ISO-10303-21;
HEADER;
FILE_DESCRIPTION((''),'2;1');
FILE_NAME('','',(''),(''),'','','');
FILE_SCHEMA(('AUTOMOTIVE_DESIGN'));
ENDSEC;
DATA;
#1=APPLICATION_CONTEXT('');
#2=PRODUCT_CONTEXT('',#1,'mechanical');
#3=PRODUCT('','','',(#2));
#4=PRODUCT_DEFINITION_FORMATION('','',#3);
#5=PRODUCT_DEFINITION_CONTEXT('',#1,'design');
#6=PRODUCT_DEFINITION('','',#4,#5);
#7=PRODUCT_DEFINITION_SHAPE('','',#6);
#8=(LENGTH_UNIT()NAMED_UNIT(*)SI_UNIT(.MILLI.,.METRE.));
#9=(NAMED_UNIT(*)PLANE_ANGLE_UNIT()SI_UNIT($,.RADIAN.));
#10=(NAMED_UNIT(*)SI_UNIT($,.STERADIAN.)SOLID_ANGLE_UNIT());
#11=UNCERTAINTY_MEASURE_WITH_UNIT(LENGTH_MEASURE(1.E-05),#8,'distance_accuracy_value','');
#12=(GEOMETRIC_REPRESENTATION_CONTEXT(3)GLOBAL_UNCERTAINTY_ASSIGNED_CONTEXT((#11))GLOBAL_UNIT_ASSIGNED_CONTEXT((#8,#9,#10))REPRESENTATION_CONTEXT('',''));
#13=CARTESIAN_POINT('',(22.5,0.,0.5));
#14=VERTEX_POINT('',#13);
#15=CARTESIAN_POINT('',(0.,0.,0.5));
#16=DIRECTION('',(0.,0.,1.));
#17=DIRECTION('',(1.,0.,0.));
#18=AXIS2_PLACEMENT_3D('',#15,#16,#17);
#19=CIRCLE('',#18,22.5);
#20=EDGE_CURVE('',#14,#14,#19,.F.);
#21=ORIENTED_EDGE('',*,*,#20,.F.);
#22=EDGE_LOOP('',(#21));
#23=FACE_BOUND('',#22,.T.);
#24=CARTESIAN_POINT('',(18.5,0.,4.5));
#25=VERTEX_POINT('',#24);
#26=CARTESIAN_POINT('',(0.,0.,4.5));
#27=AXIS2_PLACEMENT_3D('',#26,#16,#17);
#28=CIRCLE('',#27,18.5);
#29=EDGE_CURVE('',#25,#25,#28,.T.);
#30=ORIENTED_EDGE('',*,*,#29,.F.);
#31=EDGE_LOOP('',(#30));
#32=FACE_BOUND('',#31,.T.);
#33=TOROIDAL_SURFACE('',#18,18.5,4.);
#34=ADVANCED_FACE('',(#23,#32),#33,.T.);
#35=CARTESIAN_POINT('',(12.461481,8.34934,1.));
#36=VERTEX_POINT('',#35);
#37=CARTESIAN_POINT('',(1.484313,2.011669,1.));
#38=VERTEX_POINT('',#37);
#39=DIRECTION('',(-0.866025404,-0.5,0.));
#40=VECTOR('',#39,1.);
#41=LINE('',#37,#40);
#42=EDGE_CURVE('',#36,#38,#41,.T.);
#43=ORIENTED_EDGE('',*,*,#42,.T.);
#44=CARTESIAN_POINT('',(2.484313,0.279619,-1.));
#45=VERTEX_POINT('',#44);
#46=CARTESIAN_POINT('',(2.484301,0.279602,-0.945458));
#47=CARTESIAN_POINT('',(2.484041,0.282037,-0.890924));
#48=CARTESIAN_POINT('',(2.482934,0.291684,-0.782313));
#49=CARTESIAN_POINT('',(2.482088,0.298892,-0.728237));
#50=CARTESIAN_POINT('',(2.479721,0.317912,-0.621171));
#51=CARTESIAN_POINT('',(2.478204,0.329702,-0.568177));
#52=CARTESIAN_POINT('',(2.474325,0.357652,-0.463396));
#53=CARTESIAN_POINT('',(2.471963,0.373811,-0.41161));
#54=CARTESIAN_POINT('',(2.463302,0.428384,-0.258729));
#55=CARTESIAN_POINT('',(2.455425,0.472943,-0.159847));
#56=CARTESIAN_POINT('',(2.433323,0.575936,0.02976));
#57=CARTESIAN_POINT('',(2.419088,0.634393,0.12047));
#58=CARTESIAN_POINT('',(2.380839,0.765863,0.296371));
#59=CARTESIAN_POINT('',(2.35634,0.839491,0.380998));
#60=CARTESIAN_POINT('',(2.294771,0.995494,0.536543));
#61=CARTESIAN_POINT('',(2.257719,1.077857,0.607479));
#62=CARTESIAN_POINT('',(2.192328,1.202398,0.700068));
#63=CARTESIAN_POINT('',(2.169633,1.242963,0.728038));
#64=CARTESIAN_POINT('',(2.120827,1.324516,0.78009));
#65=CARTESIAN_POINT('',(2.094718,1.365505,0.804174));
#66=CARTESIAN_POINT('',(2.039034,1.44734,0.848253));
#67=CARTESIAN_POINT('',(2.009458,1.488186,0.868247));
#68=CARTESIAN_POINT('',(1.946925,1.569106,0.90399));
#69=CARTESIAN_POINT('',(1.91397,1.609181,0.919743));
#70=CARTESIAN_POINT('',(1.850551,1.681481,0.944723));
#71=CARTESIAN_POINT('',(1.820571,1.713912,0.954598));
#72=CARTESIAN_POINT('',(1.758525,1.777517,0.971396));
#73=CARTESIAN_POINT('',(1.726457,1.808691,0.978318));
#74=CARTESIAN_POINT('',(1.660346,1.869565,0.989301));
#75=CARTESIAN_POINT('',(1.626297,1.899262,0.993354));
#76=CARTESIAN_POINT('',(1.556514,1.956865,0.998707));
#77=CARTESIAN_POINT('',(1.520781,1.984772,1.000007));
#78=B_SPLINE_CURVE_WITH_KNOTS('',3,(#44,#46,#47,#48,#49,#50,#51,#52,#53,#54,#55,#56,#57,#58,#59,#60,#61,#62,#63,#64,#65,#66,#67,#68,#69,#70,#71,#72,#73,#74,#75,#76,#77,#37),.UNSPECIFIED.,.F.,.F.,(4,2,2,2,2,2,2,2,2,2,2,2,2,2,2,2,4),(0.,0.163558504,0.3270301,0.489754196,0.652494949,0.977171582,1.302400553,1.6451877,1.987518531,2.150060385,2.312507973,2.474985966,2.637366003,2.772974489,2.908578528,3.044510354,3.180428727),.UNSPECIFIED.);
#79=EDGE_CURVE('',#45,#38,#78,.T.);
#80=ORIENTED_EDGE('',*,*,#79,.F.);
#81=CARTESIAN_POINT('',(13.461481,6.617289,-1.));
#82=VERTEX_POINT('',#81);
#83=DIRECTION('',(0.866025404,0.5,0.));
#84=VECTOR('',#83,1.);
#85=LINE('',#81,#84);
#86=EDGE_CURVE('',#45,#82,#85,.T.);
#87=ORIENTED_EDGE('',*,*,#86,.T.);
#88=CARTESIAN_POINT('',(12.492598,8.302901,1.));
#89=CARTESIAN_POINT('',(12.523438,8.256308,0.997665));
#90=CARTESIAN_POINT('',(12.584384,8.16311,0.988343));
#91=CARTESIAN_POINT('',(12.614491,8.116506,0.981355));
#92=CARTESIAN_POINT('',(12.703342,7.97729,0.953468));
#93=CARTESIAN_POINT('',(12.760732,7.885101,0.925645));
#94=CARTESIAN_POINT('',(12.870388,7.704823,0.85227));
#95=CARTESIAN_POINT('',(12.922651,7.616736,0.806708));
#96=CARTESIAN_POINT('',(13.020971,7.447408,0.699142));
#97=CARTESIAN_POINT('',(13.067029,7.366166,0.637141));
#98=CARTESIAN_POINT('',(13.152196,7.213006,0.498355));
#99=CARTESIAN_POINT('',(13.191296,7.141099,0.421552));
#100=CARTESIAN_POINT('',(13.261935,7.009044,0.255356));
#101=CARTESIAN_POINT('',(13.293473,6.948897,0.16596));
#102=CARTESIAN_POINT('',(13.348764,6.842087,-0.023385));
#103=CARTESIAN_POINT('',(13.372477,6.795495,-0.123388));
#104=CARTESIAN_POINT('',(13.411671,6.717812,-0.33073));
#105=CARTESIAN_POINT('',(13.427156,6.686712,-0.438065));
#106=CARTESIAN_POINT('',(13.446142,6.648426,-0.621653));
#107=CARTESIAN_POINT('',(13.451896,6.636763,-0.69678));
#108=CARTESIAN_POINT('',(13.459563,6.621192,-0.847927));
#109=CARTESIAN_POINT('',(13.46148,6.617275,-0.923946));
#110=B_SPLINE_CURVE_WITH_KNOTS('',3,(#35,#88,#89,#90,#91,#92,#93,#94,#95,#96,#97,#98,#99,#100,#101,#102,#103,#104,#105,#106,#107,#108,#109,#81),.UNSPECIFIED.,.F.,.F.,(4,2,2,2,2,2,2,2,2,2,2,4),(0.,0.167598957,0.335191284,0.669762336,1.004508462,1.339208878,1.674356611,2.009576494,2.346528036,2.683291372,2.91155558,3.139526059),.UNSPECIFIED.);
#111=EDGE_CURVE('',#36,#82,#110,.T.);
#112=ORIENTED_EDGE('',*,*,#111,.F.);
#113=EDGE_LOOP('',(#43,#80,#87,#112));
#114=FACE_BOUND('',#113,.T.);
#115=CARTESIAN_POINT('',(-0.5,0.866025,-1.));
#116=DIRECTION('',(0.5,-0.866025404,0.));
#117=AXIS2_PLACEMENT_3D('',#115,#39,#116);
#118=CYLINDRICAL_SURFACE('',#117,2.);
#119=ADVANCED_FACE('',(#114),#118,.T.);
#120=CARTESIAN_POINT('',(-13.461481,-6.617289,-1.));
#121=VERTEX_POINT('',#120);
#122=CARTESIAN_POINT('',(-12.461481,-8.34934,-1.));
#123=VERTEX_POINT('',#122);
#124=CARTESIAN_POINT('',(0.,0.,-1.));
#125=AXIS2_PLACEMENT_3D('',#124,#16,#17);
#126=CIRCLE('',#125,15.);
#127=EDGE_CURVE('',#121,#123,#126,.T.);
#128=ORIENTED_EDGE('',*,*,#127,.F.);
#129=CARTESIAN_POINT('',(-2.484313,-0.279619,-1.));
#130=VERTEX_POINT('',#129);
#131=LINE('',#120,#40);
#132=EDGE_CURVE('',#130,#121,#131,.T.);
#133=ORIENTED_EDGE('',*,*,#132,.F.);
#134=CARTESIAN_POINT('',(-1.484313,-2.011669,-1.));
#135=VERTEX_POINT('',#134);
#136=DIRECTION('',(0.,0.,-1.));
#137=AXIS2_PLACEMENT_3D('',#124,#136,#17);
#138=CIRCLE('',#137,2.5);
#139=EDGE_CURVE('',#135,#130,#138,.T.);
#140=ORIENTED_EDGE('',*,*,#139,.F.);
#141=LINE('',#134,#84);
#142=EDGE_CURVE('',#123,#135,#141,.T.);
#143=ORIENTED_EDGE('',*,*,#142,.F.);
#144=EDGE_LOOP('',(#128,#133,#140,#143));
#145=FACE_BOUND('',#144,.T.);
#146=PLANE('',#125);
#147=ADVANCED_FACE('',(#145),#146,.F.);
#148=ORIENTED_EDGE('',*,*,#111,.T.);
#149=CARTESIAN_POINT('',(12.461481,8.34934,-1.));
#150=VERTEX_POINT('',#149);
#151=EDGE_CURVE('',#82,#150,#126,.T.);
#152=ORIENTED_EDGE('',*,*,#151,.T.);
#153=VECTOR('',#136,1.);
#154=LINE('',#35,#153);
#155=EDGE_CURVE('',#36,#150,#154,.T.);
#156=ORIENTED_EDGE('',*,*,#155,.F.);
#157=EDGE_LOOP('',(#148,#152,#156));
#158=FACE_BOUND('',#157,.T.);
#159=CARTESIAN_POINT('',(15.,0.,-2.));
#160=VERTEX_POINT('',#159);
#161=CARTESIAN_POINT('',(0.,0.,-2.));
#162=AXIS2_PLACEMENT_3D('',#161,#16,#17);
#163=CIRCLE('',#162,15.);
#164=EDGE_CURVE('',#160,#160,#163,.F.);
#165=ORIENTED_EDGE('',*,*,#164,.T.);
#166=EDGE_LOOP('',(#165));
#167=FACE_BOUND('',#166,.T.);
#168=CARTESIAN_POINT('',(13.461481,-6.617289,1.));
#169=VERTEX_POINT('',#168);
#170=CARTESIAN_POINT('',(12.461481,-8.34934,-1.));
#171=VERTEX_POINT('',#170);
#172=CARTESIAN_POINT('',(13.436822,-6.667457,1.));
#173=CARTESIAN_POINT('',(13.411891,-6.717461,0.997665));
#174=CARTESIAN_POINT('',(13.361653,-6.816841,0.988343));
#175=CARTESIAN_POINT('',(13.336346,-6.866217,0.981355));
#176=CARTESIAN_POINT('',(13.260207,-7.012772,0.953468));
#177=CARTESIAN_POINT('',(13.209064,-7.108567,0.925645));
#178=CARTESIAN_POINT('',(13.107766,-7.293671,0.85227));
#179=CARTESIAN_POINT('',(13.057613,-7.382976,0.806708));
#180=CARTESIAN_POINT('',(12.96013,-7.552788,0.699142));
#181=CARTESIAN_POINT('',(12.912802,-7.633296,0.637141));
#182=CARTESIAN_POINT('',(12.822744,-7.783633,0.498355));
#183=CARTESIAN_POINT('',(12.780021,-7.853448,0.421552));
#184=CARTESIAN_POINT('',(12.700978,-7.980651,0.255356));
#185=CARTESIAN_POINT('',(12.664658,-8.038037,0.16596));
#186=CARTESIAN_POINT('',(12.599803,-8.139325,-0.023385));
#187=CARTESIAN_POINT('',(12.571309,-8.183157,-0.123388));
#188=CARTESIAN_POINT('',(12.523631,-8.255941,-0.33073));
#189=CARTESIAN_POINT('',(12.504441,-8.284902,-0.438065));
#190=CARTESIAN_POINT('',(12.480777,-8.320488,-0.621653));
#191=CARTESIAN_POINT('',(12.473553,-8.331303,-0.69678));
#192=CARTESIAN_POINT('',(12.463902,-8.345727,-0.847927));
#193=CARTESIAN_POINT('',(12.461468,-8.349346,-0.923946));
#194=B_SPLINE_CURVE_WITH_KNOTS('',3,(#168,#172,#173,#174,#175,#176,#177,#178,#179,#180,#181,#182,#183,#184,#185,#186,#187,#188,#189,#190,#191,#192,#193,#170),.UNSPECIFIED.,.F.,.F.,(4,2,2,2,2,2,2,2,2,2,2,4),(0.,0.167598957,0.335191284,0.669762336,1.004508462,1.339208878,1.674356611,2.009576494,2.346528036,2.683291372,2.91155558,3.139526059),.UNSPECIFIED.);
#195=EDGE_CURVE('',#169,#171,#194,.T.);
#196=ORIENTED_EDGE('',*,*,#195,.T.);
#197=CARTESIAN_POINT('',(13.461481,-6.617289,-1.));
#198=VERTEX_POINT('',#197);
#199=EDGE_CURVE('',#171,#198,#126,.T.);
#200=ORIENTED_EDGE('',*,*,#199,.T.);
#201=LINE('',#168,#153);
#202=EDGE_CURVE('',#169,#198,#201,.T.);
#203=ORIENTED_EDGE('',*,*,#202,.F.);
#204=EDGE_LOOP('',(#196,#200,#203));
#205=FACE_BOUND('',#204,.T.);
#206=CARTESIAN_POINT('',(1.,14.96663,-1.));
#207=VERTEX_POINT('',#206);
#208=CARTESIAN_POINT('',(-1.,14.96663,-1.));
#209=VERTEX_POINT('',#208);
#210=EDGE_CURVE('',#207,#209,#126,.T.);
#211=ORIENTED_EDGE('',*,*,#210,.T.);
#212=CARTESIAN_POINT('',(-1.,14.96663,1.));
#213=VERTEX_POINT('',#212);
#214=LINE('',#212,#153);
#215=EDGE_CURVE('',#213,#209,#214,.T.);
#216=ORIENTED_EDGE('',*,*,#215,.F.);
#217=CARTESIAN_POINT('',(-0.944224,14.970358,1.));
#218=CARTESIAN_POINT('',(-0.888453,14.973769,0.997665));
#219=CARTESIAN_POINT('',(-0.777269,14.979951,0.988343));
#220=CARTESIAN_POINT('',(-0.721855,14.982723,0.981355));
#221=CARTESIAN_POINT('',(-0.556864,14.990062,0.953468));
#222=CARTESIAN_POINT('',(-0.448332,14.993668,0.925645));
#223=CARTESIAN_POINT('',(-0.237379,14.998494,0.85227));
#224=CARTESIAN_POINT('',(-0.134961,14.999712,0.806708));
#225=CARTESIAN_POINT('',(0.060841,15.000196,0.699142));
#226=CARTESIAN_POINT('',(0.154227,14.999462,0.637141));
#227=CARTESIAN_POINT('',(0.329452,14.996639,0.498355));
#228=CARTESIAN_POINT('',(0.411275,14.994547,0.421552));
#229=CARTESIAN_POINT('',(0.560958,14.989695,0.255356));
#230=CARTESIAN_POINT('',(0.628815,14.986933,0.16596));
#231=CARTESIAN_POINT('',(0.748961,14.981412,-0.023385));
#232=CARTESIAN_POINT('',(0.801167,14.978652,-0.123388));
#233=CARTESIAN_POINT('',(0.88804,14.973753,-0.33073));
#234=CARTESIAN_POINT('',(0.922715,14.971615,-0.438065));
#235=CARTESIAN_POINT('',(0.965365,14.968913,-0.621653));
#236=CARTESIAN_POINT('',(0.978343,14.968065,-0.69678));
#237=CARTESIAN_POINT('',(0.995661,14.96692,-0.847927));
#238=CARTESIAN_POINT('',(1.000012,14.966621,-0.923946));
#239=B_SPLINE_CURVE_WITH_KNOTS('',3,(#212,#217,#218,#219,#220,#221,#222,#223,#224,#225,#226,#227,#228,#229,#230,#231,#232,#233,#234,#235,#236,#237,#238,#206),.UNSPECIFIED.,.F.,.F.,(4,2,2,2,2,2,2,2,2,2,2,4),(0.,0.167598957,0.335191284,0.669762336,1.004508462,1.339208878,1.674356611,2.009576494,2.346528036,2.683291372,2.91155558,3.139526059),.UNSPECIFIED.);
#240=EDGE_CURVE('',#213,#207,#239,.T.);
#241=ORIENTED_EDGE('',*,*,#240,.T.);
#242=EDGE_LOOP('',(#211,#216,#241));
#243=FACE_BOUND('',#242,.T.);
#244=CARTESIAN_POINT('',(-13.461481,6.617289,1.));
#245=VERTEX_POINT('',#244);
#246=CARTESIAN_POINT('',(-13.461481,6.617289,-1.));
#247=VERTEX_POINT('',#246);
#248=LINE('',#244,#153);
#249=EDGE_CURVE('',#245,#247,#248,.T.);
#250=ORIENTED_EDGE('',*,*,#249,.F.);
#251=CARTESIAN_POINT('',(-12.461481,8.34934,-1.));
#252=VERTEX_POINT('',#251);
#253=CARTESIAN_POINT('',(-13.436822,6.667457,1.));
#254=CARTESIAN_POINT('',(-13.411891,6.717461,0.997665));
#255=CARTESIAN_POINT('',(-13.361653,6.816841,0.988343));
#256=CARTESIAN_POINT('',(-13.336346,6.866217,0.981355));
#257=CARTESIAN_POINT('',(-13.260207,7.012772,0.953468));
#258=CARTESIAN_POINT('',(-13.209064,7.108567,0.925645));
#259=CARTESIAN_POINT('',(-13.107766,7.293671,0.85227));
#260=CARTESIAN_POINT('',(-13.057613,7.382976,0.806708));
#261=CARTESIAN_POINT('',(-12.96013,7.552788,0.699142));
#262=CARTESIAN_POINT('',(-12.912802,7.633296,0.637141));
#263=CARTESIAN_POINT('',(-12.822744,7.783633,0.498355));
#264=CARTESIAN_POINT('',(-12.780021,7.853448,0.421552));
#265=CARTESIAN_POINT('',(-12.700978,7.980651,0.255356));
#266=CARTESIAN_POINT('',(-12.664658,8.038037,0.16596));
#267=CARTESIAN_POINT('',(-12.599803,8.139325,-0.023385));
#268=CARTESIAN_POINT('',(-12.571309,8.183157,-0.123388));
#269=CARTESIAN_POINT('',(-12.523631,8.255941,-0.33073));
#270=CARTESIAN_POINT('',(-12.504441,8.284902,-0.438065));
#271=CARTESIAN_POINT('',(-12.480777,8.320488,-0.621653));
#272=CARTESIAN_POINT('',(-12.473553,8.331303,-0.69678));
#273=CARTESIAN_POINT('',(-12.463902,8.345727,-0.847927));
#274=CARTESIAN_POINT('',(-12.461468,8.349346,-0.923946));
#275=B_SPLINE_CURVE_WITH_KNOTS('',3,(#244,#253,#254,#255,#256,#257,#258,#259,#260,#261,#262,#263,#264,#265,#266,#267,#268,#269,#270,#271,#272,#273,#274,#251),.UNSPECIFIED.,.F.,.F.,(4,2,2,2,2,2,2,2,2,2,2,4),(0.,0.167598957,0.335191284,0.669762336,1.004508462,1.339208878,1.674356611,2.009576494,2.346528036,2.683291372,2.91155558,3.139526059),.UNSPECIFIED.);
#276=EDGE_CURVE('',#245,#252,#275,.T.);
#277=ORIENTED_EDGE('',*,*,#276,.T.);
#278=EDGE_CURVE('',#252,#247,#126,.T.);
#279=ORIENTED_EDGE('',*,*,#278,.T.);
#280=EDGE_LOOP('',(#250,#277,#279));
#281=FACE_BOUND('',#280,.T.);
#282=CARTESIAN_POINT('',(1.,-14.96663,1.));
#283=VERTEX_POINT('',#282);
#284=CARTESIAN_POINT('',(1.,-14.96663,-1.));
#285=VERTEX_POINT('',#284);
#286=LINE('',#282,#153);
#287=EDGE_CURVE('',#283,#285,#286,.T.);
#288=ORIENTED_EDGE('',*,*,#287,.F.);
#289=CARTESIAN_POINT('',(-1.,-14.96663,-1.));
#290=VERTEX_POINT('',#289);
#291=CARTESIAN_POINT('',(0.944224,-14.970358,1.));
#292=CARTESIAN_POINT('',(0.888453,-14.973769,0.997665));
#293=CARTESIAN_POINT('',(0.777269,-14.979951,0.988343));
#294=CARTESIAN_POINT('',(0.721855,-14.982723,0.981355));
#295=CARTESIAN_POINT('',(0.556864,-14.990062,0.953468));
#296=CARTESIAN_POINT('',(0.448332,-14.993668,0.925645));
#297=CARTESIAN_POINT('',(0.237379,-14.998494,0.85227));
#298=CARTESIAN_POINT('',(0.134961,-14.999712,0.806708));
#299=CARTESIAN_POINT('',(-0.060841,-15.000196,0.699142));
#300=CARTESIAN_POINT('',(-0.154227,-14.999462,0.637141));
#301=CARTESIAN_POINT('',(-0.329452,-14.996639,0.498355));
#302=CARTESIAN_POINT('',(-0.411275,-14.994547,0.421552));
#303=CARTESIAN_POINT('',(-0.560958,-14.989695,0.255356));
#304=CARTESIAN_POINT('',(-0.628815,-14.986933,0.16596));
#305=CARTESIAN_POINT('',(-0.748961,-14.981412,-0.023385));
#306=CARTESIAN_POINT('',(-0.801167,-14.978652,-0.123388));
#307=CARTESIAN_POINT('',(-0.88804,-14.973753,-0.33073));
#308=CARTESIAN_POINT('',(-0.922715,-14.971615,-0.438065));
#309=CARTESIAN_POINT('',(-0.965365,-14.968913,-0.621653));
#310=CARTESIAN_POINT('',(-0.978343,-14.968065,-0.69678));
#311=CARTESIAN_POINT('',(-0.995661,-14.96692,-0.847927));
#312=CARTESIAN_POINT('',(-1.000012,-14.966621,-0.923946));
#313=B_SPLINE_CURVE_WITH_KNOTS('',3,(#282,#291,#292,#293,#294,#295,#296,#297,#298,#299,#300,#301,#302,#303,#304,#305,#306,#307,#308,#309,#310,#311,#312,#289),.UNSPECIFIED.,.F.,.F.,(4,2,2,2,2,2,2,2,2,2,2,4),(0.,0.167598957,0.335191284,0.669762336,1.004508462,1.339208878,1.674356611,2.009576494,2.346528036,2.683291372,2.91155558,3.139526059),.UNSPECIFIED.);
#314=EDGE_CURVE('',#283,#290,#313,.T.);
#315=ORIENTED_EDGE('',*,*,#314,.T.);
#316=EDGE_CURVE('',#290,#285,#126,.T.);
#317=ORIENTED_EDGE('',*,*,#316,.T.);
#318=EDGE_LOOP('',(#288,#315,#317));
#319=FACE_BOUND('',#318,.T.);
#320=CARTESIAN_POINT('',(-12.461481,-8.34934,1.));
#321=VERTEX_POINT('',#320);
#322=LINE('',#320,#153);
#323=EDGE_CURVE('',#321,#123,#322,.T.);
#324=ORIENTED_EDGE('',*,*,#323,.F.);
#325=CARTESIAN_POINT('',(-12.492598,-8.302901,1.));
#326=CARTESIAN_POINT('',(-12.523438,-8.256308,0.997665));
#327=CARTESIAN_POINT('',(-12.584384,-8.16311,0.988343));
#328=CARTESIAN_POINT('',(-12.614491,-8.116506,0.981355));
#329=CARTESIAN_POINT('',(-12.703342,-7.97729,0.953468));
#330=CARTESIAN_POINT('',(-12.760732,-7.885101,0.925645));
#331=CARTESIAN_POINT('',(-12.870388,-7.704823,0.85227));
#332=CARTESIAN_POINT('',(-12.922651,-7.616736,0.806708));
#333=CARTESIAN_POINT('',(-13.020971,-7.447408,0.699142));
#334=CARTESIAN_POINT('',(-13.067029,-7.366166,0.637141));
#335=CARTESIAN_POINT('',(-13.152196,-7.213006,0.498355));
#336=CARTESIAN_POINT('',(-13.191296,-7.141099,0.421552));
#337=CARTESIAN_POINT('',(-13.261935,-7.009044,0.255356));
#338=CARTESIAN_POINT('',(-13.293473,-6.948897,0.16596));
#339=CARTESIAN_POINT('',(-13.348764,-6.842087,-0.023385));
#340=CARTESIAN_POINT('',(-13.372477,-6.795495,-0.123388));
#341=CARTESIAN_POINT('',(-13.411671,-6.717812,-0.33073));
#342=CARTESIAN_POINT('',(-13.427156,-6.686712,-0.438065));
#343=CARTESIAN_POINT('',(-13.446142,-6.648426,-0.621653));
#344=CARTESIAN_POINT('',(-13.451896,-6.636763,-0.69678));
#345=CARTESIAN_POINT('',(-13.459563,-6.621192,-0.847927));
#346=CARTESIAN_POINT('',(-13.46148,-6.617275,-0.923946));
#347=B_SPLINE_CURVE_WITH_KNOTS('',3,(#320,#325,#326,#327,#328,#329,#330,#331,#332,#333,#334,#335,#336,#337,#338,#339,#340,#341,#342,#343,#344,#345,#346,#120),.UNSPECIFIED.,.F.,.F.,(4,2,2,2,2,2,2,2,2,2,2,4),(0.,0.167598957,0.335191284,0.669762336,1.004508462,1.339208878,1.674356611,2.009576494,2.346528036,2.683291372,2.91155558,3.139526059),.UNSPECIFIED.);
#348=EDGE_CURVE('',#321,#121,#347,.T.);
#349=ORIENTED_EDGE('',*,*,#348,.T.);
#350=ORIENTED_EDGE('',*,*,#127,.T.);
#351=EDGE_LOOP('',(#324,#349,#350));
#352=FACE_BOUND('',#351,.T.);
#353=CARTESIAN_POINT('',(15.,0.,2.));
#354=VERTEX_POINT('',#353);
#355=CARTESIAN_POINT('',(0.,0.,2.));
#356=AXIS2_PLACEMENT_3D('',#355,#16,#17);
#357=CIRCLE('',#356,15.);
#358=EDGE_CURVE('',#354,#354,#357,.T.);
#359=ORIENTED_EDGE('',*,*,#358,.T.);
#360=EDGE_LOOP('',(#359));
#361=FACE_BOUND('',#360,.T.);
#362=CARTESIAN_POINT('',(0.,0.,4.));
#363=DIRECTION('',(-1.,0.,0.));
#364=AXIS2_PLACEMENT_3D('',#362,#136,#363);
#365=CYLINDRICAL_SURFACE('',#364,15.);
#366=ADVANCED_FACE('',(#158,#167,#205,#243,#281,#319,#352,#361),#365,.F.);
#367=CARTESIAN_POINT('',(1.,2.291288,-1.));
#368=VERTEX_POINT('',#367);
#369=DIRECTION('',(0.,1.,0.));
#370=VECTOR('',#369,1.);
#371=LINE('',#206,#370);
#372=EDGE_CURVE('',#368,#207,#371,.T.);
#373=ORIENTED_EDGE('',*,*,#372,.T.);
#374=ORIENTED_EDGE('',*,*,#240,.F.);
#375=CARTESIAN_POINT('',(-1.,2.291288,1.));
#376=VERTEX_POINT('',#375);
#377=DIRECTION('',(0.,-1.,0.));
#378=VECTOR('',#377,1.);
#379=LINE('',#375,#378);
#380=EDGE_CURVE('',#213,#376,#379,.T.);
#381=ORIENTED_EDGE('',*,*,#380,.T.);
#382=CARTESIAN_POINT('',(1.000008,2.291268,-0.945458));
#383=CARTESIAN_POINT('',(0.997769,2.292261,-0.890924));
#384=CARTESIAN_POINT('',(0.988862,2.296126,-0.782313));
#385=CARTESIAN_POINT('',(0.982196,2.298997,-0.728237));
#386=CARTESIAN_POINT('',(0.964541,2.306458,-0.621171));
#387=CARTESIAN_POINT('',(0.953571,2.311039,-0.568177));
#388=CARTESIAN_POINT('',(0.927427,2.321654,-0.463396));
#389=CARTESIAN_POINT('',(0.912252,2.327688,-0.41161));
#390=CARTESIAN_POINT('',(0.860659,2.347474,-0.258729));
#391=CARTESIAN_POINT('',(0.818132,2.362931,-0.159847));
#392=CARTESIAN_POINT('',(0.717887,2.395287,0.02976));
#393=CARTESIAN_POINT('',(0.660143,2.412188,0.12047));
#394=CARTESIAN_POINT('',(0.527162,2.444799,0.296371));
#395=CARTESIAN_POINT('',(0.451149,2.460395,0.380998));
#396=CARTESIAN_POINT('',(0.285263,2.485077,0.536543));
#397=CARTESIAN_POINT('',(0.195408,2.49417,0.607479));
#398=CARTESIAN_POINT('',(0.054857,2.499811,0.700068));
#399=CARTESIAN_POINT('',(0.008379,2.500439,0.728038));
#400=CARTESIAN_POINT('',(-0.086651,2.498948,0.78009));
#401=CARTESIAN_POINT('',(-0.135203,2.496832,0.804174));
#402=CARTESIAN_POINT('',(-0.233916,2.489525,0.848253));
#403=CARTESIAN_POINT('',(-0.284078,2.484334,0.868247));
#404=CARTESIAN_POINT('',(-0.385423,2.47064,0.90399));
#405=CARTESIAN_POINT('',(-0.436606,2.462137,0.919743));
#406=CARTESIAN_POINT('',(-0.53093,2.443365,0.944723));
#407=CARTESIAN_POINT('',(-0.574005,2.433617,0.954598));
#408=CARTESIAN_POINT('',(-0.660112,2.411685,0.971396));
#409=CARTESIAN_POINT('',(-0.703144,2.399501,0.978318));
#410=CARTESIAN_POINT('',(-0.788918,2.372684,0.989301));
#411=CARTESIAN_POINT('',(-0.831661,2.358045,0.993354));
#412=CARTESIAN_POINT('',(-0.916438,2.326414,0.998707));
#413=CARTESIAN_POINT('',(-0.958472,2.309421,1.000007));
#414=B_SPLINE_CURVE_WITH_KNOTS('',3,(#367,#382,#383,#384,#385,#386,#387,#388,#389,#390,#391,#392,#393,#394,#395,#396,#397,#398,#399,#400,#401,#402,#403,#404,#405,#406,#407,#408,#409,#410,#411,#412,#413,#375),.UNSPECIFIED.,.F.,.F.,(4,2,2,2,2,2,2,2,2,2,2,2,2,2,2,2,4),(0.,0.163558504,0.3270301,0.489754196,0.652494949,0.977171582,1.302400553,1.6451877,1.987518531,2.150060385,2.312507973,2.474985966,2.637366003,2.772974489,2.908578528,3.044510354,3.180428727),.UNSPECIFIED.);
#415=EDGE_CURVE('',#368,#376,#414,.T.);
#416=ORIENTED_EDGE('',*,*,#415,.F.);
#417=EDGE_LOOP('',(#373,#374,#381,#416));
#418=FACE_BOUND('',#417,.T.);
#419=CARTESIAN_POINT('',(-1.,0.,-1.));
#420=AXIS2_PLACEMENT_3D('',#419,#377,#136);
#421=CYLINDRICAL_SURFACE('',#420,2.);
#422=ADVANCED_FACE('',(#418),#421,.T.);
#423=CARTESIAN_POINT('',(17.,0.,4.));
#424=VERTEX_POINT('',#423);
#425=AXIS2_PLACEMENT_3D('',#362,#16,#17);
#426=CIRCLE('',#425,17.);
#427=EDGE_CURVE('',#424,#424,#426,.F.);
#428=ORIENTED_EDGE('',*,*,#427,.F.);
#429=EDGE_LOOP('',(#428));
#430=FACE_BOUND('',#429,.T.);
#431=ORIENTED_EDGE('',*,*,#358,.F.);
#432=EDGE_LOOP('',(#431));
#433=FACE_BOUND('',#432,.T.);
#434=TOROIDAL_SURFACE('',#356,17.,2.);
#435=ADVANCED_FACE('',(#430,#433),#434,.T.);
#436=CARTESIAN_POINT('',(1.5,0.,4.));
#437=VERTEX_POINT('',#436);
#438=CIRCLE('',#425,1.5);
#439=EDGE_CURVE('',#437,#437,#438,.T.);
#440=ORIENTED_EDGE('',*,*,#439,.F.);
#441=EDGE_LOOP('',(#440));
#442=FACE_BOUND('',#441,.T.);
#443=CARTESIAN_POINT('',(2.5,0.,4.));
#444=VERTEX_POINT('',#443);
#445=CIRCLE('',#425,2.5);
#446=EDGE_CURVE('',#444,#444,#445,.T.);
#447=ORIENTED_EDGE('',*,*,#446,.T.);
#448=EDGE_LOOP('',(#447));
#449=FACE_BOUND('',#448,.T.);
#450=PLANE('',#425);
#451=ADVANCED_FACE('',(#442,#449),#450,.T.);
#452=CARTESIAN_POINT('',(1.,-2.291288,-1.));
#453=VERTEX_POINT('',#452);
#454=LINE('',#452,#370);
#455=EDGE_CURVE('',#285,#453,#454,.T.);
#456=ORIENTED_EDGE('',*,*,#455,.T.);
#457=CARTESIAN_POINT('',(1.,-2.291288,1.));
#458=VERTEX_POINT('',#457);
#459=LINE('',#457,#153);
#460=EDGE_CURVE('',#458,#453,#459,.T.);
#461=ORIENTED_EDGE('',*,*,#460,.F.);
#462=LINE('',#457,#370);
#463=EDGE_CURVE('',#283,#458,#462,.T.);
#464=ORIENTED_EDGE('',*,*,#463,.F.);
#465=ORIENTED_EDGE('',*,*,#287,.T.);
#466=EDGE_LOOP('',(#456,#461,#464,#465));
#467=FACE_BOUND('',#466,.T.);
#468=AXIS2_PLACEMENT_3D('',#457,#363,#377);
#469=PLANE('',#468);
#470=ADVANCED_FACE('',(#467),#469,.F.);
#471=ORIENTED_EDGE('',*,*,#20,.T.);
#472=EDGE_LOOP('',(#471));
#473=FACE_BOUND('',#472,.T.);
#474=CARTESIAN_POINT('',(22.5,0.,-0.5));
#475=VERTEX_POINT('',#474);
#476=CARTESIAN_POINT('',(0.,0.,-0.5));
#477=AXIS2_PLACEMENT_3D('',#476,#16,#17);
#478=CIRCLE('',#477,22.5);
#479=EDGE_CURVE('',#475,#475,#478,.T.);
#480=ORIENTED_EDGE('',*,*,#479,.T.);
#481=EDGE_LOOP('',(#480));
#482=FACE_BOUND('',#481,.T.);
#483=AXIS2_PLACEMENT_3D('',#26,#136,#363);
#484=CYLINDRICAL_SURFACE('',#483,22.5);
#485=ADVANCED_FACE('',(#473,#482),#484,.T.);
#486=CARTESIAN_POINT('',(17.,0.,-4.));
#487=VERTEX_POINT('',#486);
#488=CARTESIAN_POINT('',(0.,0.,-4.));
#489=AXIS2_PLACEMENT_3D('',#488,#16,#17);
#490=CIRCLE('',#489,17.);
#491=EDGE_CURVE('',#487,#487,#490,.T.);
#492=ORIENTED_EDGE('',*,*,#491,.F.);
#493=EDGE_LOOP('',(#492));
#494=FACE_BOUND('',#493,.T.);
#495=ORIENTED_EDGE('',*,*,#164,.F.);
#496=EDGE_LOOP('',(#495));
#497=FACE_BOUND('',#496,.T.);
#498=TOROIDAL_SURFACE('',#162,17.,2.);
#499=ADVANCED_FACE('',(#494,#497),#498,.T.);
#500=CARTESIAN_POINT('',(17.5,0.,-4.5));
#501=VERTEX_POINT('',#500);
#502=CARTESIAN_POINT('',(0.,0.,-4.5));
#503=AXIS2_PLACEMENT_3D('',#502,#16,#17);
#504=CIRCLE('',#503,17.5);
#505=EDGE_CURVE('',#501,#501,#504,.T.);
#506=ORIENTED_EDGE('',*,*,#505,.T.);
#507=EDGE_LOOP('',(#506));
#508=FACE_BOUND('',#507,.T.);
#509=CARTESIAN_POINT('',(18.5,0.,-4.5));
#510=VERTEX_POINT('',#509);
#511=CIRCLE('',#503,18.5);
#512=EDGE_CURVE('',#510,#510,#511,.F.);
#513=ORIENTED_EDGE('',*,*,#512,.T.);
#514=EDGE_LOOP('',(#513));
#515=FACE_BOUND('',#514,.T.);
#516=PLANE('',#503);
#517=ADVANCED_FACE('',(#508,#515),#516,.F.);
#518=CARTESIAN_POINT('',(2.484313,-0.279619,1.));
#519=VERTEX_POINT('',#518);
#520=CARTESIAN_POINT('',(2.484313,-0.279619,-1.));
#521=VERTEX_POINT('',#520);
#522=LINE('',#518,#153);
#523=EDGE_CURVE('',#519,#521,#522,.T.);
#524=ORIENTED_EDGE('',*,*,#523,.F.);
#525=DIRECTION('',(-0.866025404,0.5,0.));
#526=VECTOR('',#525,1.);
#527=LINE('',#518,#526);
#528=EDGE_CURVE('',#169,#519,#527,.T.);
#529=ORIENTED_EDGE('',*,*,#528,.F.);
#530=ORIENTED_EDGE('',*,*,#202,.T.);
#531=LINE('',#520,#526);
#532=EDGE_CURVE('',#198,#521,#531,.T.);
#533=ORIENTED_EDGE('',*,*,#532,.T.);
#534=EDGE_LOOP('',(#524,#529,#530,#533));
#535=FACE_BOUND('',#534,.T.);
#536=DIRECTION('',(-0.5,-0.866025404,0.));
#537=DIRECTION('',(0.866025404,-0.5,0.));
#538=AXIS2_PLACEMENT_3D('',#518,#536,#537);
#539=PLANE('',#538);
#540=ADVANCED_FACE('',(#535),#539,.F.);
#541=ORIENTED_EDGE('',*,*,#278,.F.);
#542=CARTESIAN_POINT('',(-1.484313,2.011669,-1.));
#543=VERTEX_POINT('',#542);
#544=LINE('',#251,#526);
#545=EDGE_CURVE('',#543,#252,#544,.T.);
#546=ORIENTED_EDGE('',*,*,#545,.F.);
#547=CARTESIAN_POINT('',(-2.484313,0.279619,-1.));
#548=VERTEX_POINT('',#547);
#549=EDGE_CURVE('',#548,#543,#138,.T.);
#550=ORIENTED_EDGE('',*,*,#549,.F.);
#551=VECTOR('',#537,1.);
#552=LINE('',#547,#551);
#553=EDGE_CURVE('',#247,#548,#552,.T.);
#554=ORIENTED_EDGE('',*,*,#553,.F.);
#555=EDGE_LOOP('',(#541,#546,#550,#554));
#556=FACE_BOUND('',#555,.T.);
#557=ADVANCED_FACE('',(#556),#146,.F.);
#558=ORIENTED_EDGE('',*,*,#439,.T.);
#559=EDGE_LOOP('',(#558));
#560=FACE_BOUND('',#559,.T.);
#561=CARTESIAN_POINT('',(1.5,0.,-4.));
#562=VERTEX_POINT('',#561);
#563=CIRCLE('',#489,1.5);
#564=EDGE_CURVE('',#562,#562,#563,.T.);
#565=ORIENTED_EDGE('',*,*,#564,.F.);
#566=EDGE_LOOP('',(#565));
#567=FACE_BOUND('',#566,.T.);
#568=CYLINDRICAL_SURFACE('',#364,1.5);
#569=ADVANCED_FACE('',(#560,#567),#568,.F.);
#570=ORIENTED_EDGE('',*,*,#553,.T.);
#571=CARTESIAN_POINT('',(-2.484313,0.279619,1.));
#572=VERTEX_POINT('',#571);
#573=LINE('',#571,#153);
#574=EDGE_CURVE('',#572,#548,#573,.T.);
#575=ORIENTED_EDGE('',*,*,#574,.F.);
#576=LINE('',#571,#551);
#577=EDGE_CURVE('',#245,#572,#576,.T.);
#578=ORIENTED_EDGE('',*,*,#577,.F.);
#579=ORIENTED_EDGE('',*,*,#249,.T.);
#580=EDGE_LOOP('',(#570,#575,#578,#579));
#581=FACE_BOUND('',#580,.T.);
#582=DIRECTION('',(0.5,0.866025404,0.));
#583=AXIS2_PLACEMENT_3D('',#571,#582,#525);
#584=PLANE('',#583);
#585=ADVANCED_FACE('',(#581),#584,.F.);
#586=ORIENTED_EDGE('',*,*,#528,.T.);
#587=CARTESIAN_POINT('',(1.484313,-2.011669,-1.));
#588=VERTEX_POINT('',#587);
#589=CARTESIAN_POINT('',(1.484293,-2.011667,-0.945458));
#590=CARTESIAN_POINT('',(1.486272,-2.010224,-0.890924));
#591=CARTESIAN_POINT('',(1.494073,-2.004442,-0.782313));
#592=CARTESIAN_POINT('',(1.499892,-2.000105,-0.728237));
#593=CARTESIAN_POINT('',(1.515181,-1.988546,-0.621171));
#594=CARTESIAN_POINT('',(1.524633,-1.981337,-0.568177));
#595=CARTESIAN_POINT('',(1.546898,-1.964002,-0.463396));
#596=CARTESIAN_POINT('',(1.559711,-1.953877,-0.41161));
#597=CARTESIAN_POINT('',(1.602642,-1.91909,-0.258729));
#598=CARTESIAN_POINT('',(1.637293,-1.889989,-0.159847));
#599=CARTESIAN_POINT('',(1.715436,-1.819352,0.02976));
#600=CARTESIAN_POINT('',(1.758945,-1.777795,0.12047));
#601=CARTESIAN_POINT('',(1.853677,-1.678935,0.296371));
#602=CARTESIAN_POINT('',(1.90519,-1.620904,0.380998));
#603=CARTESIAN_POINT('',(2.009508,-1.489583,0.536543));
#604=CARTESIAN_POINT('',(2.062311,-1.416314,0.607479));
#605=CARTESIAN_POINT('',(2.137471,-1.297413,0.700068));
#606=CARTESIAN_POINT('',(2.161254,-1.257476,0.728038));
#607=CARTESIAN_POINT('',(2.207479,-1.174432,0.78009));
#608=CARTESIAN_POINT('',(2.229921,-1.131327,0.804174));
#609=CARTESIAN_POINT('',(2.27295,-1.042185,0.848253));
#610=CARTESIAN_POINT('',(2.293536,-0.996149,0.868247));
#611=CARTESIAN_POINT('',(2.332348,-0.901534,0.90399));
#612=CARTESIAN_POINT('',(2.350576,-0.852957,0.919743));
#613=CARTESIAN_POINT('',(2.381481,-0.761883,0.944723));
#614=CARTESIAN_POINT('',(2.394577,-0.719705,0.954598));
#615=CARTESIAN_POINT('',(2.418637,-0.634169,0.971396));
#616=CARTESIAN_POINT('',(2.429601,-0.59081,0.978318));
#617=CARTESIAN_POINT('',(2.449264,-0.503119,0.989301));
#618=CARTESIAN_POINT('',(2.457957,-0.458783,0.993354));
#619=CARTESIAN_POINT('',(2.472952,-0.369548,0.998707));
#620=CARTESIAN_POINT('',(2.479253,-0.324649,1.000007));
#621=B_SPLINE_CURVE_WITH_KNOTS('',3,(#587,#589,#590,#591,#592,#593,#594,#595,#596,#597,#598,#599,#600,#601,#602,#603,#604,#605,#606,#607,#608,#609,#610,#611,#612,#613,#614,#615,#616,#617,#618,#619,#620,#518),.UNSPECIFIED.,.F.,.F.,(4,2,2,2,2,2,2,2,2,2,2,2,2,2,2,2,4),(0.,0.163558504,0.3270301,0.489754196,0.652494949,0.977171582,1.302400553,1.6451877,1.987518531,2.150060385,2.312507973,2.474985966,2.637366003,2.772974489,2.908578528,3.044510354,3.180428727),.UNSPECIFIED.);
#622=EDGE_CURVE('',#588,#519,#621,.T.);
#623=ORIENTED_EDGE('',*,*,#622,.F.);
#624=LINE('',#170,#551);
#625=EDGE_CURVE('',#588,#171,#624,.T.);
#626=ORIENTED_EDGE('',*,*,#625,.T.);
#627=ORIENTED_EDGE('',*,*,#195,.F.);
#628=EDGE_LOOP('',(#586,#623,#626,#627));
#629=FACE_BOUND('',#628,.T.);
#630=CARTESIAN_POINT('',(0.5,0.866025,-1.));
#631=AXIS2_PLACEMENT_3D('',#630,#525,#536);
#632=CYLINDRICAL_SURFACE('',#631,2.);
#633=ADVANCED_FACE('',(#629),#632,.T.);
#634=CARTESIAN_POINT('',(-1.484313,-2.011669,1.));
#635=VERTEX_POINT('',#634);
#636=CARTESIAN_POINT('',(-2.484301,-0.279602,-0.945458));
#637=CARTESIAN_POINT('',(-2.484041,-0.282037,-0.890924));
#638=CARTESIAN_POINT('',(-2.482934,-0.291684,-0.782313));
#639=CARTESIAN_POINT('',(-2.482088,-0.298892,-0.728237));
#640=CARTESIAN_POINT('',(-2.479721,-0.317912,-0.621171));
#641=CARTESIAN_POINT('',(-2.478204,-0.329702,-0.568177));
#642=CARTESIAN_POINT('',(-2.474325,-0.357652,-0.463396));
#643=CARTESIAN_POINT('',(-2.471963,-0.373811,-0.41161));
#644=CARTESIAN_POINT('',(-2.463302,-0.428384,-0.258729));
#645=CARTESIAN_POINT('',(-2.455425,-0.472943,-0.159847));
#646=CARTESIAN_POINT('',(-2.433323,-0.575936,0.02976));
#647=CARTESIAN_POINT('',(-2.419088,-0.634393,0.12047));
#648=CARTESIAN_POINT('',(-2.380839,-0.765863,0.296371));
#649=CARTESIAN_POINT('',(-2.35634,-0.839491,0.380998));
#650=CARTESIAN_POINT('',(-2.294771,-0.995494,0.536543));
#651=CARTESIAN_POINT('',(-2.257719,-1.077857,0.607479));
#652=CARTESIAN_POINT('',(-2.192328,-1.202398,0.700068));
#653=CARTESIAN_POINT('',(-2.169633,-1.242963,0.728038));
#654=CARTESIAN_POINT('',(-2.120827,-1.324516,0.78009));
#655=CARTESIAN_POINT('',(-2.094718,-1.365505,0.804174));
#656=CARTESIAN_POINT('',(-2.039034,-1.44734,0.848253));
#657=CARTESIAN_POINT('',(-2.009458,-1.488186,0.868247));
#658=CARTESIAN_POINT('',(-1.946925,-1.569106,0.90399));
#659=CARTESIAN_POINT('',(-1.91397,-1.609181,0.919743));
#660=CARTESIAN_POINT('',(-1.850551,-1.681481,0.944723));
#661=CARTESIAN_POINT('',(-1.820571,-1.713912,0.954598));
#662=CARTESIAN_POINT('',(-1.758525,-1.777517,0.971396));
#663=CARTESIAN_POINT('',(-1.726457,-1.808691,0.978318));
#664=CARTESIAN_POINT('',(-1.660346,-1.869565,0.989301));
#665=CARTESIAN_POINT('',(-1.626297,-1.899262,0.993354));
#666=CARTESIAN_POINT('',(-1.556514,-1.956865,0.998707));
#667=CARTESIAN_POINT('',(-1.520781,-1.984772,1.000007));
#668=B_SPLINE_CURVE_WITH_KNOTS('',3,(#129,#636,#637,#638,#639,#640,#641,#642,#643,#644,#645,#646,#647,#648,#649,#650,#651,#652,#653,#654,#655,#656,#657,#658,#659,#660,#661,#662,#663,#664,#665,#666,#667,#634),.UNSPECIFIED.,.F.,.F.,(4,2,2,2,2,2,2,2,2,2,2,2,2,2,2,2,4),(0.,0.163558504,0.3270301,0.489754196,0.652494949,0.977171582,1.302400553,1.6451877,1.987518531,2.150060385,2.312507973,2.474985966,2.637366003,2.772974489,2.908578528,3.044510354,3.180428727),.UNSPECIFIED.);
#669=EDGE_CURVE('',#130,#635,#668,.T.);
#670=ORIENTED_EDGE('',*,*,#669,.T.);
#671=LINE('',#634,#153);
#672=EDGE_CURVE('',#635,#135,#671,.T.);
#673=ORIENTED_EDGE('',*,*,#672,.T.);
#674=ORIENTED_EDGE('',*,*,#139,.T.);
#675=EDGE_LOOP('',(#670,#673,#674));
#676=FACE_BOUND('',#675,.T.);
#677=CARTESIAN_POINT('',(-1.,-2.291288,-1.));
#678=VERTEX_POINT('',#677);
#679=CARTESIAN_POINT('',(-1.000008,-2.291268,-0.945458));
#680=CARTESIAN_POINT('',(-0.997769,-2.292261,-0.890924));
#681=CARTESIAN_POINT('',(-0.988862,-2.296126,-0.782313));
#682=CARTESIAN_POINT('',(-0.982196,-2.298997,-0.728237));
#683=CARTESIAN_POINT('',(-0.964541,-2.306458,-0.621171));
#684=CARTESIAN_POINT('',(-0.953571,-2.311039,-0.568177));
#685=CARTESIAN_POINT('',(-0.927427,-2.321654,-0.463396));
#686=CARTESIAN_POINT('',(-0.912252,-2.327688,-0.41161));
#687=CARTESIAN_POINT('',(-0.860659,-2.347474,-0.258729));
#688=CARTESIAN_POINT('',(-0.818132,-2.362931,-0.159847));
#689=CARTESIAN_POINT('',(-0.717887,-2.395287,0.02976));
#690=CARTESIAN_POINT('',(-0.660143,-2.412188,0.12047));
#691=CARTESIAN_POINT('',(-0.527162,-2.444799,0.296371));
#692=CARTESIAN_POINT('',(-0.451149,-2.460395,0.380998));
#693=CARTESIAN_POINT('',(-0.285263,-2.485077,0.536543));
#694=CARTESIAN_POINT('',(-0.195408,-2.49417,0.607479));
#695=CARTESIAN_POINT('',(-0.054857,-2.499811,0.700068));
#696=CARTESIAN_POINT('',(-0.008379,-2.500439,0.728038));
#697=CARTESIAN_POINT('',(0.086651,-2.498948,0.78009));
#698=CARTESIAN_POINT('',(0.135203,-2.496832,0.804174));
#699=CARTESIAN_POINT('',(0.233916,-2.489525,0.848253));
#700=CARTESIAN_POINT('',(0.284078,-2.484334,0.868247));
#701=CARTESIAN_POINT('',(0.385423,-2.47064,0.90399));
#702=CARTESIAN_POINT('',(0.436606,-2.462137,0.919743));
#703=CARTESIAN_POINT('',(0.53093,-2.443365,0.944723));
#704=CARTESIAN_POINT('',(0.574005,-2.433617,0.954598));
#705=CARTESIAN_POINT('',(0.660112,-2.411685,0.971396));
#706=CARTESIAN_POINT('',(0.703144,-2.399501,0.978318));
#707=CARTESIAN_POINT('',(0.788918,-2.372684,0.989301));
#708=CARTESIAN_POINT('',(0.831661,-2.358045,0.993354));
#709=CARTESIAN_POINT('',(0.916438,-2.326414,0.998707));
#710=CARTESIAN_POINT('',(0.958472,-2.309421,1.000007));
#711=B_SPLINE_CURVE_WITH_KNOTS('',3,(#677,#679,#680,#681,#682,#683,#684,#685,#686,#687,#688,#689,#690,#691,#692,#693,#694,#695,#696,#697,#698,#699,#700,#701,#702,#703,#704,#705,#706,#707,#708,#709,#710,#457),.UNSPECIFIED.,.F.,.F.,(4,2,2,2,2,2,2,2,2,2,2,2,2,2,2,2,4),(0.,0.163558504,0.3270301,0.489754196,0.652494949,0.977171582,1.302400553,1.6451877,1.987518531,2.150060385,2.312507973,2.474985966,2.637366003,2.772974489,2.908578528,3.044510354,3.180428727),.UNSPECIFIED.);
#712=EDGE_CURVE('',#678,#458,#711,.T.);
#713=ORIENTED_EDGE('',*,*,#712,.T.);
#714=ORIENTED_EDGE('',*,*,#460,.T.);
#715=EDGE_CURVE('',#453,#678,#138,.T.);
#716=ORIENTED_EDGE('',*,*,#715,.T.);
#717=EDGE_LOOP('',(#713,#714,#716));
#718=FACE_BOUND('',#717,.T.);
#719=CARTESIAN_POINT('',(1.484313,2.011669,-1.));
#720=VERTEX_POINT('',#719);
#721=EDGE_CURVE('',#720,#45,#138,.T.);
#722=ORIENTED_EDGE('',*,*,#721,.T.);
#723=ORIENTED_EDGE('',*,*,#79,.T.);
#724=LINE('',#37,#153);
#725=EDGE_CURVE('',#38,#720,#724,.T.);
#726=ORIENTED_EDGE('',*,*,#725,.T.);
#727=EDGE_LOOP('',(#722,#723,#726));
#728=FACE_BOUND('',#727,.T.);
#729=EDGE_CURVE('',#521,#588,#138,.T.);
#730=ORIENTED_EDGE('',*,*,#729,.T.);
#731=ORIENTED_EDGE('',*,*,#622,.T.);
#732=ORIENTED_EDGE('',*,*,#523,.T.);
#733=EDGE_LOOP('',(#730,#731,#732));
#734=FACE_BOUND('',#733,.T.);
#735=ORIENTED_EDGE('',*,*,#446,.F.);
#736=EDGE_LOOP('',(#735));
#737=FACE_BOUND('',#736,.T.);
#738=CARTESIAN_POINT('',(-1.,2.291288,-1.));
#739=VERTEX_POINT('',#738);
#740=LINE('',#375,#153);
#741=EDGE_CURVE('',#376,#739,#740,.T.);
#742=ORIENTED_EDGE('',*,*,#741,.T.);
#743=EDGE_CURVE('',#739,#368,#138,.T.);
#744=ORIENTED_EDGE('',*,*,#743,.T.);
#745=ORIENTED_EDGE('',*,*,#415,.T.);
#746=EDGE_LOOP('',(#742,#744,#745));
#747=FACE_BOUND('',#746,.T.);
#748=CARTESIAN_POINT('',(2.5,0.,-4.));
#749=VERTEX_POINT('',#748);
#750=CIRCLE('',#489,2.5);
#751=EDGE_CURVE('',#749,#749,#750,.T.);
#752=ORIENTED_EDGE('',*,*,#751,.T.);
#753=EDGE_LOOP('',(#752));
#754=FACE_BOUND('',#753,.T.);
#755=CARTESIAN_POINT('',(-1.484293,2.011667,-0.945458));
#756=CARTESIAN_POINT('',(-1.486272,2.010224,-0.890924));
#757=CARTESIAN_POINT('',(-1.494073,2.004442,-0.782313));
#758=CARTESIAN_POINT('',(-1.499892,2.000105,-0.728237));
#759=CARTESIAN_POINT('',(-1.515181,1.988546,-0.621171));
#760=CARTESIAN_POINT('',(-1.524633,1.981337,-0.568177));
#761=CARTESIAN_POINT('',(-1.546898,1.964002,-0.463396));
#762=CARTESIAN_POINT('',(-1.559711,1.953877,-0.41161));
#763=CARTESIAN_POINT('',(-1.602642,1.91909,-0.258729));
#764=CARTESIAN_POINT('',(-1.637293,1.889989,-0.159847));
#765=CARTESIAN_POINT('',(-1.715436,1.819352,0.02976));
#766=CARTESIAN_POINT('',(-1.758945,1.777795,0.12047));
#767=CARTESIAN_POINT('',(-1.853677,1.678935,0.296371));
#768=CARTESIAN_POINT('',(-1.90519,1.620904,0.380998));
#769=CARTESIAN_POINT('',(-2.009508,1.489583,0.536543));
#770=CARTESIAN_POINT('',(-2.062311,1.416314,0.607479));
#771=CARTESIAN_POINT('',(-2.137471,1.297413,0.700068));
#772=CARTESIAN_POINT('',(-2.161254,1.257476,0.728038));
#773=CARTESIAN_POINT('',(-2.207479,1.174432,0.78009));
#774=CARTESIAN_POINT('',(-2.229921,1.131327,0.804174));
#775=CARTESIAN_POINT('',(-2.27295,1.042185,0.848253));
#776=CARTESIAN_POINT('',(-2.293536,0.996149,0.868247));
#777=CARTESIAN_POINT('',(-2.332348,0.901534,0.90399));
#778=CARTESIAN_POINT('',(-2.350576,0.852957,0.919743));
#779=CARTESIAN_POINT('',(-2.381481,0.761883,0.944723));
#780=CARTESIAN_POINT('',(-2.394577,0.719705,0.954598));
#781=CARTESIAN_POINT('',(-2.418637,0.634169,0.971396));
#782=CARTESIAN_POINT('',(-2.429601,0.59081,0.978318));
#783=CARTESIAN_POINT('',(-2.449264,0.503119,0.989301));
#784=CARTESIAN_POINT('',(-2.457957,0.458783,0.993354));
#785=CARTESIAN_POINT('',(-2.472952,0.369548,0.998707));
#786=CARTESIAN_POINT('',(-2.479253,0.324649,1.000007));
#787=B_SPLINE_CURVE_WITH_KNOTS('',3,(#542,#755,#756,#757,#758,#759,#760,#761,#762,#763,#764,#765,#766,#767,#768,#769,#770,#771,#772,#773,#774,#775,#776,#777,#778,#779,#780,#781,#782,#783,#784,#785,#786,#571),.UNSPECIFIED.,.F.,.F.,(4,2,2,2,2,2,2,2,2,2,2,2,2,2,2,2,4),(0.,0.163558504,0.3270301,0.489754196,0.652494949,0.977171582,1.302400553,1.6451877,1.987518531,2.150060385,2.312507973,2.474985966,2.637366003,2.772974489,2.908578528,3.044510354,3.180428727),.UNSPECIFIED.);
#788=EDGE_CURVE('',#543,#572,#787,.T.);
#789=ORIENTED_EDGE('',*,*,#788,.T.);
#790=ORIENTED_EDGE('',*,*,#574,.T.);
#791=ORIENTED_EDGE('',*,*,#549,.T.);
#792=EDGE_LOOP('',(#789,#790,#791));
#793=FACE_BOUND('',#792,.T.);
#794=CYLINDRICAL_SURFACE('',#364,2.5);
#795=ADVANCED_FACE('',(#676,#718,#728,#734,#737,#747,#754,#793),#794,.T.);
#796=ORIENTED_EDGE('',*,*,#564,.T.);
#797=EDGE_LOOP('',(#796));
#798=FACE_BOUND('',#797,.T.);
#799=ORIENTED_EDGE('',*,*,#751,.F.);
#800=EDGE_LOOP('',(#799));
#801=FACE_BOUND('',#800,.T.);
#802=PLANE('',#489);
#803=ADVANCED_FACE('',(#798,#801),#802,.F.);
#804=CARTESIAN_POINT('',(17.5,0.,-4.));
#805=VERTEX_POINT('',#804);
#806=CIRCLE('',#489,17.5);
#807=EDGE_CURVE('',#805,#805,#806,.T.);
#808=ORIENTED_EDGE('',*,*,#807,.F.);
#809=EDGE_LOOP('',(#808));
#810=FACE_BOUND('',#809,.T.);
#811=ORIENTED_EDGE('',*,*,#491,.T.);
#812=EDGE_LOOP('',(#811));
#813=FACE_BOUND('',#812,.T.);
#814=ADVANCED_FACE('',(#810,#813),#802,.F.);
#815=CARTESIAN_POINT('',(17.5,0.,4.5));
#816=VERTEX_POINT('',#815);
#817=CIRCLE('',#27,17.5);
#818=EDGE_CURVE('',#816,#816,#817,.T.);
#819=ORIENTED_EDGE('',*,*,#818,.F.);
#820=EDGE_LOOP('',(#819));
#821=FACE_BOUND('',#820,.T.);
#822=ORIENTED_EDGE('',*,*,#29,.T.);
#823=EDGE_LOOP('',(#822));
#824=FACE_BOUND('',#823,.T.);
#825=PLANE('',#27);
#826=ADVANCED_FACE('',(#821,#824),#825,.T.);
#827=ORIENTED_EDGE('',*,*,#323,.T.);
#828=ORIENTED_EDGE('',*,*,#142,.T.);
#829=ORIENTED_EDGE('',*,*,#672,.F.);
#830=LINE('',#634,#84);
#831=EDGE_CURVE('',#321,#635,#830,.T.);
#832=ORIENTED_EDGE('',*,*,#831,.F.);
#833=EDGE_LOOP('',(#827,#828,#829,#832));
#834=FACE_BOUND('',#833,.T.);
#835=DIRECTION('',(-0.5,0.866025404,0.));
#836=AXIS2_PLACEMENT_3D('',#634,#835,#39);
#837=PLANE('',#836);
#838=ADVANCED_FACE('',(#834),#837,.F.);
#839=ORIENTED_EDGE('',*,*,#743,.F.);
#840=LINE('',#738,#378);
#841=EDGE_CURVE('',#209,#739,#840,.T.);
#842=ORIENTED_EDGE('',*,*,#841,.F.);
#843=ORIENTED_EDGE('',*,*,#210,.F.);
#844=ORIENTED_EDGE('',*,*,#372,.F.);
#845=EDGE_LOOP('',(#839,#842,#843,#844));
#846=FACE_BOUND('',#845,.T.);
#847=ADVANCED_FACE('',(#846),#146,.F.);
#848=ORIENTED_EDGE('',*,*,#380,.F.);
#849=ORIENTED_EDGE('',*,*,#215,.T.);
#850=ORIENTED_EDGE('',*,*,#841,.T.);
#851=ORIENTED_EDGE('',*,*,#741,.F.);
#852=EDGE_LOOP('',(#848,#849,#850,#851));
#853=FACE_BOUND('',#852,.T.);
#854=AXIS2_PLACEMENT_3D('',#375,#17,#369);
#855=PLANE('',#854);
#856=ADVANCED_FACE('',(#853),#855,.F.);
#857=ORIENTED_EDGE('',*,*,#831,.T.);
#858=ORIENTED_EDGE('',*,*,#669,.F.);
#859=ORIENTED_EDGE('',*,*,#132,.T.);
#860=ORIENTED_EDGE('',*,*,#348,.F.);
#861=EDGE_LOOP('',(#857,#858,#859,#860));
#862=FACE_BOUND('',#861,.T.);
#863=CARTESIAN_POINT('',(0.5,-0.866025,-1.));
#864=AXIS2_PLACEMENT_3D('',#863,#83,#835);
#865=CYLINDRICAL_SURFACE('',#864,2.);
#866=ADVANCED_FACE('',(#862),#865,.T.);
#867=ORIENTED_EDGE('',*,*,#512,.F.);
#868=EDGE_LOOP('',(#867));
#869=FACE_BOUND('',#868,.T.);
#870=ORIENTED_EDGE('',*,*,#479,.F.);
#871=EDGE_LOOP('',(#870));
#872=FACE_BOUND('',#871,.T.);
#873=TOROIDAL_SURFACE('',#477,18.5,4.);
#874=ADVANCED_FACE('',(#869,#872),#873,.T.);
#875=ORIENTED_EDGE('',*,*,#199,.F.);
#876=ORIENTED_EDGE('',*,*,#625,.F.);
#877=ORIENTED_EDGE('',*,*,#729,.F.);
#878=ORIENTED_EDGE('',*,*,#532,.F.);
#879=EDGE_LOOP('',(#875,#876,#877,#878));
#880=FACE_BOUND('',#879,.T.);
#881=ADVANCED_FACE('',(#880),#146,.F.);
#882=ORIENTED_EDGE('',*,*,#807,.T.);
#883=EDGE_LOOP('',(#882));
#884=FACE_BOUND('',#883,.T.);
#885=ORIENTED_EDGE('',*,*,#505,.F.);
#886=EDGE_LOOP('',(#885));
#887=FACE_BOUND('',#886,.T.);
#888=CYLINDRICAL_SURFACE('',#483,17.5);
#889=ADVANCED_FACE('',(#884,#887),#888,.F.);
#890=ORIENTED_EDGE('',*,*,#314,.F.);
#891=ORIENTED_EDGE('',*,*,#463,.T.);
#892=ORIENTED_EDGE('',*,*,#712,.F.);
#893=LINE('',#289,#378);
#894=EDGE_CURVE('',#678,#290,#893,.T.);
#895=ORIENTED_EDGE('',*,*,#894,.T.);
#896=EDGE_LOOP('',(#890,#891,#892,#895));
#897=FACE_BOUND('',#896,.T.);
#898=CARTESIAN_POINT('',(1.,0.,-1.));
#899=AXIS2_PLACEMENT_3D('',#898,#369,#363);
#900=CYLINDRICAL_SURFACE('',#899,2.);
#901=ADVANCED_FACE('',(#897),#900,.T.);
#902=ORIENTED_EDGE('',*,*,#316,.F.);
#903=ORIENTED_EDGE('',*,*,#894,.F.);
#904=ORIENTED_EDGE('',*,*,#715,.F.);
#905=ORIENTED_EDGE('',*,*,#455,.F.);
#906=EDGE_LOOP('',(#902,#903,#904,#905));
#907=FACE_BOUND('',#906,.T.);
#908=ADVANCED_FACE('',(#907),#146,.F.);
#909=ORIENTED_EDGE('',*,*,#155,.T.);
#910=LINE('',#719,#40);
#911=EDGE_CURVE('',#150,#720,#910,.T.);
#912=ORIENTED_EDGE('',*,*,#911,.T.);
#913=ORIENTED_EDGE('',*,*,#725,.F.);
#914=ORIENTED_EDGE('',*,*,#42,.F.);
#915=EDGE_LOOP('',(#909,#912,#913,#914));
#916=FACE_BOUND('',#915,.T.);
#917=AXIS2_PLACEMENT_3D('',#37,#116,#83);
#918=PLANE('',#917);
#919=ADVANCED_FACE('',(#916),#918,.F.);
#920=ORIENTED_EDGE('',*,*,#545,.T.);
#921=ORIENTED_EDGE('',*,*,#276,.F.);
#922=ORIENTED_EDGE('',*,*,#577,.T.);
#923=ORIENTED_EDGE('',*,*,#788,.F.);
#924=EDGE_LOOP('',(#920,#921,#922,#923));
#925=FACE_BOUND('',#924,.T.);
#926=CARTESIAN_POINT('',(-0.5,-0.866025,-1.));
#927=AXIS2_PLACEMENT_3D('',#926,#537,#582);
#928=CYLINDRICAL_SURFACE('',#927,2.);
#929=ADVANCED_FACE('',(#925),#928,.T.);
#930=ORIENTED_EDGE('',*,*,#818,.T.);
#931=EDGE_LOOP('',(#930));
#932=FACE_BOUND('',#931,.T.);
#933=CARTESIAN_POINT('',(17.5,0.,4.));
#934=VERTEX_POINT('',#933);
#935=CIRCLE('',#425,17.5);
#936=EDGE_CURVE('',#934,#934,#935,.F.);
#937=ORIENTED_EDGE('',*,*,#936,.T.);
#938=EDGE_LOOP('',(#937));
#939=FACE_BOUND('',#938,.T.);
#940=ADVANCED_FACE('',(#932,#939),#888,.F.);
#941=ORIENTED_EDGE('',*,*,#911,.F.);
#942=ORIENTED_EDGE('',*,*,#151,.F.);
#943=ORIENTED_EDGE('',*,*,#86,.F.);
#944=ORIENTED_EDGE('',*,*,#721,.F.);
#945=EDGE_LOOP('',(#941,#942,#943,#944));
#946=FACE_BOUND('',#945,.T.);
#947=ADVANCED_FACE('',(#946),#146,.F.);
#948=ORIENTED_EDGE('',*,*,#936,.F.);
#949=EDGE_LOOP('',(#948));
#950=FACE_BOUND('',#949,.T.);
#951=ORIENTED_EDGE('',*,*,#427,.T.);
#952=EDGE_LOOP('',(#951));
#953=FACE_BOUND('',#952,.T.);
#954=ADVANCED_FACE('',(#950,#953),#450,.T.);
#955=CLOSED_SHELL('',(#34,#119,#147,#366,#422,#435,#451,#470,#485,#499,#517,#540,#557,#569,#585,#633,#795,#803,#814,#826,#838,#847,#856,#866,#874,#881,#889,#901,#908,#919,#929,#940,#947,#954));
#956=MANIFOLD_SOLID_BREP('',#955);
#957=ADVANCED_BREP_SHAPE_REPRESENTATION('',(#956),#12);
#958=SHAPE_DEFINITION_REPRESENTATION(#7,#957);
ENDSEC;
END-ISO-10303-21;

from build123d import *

# Parameters (mm, degrees)
SKETCH1_R           = 2.5
SKETCH1_R_2         = 1.5
BOSS_EXTRUDE1_DEPTH = 4
SKETCH2_R           = 17.5
SKETCH2_R_2         = 15
BOSS_EXTRUDE2_DEPTH = 4
BOSS_EXTRUDE5_DEPTH = 1
FILLET1_R           = 2
FILLET2_R           = 2
SKETCH4_R           = 22.5
SKETCH4_R_2         = 17.5
BOSS_EXTRUDE6_DEPTH = 4.5
FILLET3_R           = 4


with BuildPart() as part:
    # Sketch1 → Boss-Extrude1 (new, symmetric)
    with BuildSketch(Plane.XY):
        Circle(SKETCH1_R)
        Circle(SKETCH1_R_2, mode=Mode.SUBTRACT)
    extrude(amount=BOSS_EXTRUDE1_DEPTH, both=True)



with BuildPart() as body_2:
    # Sketch2 → Boss-Extrude2 (new, symmetric)
    with BuildSketch(Plane.XY):
        Circle(SKETCH2_R)
        Circle(SKETCH2_R_2, mode=Mode.SUBTRACT)
    extrude(amount=BOSS_EXTRUDE2_DEPTH, both=True)


with BuildPart() as part_1:
    add(part.part)

    add(body_2.part)  # Boss-Extrude5 merges body 2
    # Sketch3 → Boss-Extrude5 (add, symmetric)
    with BuildSketch(Plane.XY):
        with BuildLine():
            Line((-1, 2.291287847), (-1, 14.966629547))
            ThreePointArc((-1, 14.966629547), (0, 15), (1, 14.966629547))
            Line((1, 14.966629547), (1, 2.291287847))
            ThreePointArc((1, 2.291287847), (0, 2.5), (-1, 2.291287847))
        make_face()
        with BuildLine():
            Line((1.484313483, 2.011669328), (12.461481397, 8.349340177))
            ThreePointArc((12.461481397, 8.349340177), (12.990381057, 7.5), (13.461481397, 6.61728937))
            Line((13.461481397, 6.61728937), (2.484313483, 0.27961852))
            ThreePointArc((2.484313483, 0.27961852), (2.165063509, 1.25), (1.484313483, 2.011669328))
        make_face()
        with BuildLine():
            Line((2.484313483, -0.27961852), (13.461481397, -6.61728937))
            ThreePointArc((13.461481397, -6.61728937), (12.990381057, -7.5), (12.461481397, -8.349340177))
            Line((12.461481397, -8.349340177), (1.484313483, -2.011669328))
            ThreePointArc((1.484313483, -2.011669328), (2.165063509, -1.25), (2.484313483, -0.27961852))
        make_face()
        with BuildLine():
            Line((1, -2.291287847), (1, -14.966629547))
            ThreePointArc((1, -14.966629547), (0, -15), (-1, -14.966629547))
            Line((-1, -14.966629547), (-1, -2.291287847))
            ThreePointArc((-1, -2.291287847), (0, -2.5), (1, -2.291287847))
        make_face()
        with BuildLine():
            Line((-1.484313483, -2.011669328), (-12.461481397, -8.349340177))
            ThreePointArc((-12.461481397, -8.349340177), (-12.990381057, -7.5), (-13.461481397, -6.61728937))
            Line((-13.461481397, -6.61728937), (-2.484313483, -0.27961852))
            ThreePointArc((-2.484313483, -0.27961852), (-2.165063509, -1.25), (-1.484313483, -2.011669328))
        make_face()
        with BuildLine():
            Line((-2.484313483, 0.27961852), (-13.461481397, 6.61728937))
            ThreePointArc((-13.461481397, 6.61728937), (-12.990381057, 7.5), (-12.461481397, 8.349340177))
            Line((-12.461481397, 8.349340177), (-1.484313483, 2.011669328))
            ThreePointArc((-1.484313483, 2.011669328), (-2.165063509, 1.25), (-2.484313483, 0.27961852))
        make_face()
    extrude(amount=BOSS_EXTRUDE5_DEPTH, both=True)

    # Fillet1
    fillet1_edges = [part_1.edges().sort_by_distance(p)[0] for p in [
        (-15, 0, -4),
        (-15, 0, 4),
    ]]
    fillet(fillet1_edges, radius=FILLET1_R)

    # Fillet2
    fillet2_edges = [part_1.edges().sort_by_distance(p)[0] for p in [
        (-1, -8.628958697, 1),
        (6.97289744, -5.180504752, 1),
        (7.97289744, 3.448453945, 1),
        (1, 8.628958697, 1),
        (-6.97289744, 5.180504752, 1),
        (-7.97289744, -3.448453945, 1),
    ]]
    fillet(fillet2_edges, radius=FILLET2_R - 0.0001)  # a hair under: the kernel refuses the full size

    # Sketch4 → Boss-Extrude6 (add, symmetric)
    with BuildSketch(Plane.XY):
        Circle(SKETCH4_R)
        Circle(SKETCH4_R_2, mode=Mode.SUBTRACT)
    extrude(amount=BOSS_EXTRUDE6_DEPTH, both=True)

    # Fillet3
    fillet3_edges = [part_1.edges().sort_by_distance(p)[0] for p in [
        (-22.5, 0, 4.5),
        (-22.5, 0, -4.5),
    ]]
    fillet(fillet3_edges, radius=FILLET3_R)


solid = part_1.part
